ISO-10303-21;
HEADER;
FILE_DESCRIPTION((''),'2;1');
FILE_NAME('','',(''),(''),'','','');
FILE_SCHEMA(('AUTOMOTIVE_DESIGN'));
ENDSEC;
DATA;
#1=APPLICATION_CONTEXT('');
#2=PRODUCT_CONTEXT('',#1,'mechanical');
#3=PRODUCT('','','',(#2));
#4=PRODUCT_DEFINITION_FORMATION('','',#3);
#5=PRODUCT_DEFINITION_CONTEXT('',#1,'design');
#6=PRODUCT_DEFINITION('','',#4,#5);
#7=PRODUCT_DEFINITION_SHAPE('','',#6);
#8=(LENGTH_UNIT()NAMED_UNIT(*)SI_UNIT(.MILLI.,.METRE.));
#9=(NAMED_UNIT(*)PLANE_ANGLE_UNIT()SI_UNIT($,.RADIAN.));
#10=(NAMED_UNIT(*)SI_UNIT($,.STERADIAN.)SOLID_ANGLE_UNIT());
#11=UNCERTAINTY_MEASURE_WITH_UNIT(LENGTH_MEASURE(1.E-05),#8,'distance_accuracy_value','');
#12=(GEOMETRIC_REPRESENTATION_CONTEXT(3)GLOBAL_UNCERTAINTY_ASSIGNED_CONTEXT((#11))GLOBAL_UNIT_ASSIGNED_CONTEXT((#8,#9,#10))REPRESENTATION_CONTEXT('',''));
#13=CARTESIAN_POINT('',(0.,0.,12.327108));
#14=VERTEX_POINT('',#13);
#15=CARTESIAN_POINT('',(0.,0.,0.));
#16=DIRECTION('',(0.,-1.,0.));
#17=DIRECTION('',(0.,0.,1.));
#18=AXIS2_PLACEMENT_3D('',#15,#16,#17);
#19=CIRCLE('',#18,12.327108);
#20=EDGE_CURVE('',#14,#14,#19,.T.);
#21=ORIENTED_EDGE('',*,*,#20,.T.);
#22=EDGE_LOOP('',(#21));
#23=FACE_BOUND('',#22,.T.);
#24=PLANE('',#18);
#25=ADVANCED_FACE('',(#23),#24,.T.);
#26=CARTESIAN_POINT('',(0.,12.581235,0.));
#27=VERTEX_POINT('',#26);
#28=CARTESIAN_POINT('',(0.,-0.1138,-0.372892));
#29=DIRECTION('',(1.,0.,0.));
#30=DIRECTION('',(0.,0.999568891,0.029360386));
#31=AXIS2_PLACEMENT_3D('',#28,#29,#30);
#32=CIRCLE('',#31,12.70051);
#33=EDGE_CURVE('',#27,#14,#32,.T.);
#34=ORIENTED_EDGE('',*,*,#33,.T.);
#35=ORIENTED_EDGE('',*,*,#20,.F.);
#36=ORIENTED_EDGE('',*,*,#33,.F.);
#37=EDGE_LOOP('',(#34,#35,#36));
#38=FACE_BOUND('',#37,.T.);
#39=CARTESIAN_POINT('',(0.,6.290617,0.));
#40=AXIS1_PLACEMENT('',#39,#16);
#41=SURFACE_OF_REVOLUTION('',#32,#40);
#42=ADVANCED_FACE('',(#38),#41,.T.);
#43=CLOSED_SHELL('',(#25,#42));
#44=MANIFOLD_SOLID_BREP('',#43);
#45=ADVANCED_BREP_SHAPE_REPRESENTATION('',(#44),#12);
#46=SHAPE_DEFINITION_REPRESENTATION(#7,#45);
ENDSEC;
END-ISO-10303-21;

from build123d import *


# Not quite as in the source:
# - a feature names something its author has since deleted; it is built from what else it names


with BuildPart() as f1:
    # F0 (on Right) → F1 (revolve)
    with BuildSketch(Plane.YZ):
        with BuildLine():
            ThreePointArc((12.5812348626, 0), (8.7747298529, 8.6988771492), (0, 12.3271081309))
            Line((0, 12.3271081309), (0, 0))
            Line((0, 0), (12.5812348626, 0))
        make_face()
    revolve(axis=Axis((0, 6.2906174313, 0), (0, -1, 0)))


solid = f1.part
